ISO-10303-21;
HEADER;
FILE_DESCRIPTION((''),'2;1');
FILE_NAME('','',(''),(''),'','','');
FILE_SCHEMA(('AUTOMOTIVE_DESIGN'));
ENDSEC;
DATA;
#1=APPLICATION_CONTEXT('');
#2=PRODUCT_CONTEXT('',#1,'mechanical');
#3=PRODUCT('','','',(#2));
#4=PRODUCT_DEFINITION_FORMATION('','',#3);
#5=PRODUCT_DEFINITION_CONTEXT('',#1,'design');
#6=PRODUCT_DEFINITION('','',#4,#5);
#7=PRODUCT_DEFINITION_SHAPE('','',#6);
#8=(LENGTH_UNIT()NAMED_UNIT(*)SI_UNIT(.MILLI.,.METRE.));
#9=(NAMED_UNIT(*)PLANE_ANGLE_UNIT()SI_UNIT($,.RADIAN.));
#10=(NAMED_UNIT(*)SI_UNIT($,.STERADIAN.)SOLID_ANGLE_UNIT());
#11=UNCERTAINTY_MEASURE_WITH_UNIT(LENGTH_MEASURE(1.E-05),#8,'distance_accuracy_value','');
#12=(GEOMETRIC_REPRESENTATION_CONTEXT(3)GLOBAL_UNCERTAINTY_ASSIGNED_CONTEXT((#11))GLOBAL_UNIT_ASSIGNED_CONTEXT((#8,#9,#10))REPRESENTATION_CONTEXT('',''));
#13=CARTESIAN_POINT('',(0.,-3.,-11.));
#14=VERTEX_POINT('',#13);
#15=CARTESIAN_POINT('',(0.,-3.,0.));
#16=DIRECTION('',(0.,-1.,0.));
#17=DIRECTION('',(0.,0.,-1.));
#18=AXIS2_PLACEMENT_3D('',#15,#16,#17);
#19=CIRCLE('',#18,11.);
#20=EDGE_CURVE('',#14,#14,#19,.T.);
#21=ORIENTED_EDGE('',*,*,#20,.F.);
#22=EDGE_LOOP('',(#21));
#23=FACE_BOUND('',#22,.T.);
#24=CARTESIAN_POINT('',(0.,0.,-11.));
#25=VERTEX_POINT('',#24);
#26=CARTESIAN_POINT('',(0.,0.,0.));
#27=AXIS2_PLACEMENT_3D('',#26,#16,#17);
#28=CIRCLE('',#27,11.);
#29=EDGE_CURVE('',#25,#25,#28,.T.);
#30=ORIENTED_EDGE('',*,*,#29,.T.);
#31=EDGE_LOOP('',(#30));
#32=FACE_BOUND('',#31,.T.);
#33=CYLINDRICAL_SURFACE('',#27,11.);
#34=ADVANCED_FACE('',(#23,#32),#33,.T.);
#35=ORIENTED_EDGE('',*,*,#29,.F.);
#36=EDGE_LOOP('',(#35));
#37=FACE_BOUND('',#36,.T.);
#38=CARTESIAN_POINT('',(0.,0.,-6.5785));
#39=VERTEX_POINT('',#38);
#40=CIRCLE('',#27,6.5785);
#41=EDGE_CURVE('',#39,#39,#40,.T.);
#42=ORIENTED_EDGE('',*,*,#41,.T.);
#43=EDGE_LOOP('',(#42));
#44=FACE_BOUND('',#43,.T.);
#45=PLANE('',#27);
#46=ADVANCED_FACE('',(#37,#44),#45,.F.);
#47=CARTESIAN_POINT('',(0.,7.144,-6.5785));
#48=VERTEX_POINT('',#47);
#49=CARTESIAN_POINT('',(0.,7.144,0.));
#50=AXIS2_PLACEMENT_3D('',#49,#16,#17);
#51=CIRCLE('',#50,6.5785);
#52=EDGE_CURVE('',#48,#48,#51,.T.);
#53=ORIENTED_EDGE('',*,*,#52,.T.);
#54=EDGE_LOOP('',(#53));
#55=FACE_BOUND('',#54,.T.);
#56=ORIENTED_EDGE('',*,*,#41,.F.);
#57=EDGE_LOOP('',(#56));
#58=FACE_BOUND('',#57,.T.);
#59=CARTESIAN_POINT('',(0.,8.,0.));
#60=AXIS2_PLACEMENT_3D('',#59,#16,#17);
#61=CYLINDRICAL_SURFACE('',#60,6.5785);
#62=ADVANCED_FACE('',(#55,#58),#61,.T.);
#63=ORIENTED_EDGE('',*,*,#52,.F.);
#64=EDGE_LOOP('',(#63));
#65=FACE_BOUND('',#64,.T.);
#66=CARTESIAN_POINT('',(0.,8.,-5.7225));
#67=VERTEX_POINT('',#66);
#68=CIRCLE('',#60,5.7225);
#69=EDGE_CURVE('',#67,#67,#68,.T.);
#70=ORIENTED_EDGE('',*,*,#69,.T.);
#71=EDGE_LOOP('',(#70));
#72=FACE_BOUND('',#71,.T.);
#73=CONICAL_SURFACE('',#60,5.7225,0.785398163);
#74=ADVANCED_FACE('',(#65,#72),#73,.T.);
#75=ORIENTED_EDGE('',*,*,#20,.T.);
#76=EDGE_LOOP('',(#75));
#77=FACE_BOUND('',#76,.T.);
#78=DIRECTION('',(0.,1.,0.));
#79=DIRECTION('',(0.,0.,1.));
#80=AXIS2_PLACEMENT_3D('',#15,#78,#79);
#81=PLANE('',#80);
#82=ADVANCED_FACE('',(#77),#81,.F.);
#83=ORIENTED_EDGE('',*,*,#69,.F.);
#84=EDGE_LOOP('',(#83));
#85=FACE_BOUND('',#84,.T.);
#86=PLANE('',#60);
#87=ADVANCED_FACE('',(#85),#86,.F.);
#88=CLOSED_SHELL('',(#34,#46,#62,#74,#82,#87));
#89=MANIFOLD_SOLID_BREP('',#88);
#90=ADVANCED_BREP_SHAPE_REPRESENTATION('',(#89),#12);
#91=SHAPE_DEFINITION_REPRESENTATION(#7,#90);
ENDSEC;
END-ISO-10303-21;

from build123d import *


# Read off the part's stored shape, not the designer's step: G1/4 Straight Pipe Tapped Thread Stud1
with BuildPart() as part:
    # Sketch1 → Revolve1 (revolve)
    with BuildSketch(Plane.XY, mode=Mode.PRIVATE) as revolve1_sk:
        Polygon((7, 0), (2, 0), (2, 3), (5.5, 8), (7, 8), align=None)
        Polygon((7, 0), (2, 0), (2, -3), (11, -3), (11, 0), align=None)
        Polygon((0, 8), (5.5, 8), (2, 3), (2, 0), (2, -3), (0, -3), align=None)
    revolve(revolve1_sk.sketch.rotate(Axis((0, 0, 0), (0, 1, 0)), 90), axis=Axis((0, 0, 0), (0, 1, 0)))

    # G1/4 Straight Pipe Tapped Thread Stud1 o → G1/4 Straight Pipe Tapped Thread Stud1 (revolve, cut)
    with BuildSketch(Plane.XY):
        Polygon((7, 8), (5.7225, 8), (6.5785, 7.144), (6.5785, 0), (7, 0), align=None)
    revolve(axis=Axis((0, 0, 0), (0, 1, 0)), mode=Mode.SUBTRACT)


solid = part.part
